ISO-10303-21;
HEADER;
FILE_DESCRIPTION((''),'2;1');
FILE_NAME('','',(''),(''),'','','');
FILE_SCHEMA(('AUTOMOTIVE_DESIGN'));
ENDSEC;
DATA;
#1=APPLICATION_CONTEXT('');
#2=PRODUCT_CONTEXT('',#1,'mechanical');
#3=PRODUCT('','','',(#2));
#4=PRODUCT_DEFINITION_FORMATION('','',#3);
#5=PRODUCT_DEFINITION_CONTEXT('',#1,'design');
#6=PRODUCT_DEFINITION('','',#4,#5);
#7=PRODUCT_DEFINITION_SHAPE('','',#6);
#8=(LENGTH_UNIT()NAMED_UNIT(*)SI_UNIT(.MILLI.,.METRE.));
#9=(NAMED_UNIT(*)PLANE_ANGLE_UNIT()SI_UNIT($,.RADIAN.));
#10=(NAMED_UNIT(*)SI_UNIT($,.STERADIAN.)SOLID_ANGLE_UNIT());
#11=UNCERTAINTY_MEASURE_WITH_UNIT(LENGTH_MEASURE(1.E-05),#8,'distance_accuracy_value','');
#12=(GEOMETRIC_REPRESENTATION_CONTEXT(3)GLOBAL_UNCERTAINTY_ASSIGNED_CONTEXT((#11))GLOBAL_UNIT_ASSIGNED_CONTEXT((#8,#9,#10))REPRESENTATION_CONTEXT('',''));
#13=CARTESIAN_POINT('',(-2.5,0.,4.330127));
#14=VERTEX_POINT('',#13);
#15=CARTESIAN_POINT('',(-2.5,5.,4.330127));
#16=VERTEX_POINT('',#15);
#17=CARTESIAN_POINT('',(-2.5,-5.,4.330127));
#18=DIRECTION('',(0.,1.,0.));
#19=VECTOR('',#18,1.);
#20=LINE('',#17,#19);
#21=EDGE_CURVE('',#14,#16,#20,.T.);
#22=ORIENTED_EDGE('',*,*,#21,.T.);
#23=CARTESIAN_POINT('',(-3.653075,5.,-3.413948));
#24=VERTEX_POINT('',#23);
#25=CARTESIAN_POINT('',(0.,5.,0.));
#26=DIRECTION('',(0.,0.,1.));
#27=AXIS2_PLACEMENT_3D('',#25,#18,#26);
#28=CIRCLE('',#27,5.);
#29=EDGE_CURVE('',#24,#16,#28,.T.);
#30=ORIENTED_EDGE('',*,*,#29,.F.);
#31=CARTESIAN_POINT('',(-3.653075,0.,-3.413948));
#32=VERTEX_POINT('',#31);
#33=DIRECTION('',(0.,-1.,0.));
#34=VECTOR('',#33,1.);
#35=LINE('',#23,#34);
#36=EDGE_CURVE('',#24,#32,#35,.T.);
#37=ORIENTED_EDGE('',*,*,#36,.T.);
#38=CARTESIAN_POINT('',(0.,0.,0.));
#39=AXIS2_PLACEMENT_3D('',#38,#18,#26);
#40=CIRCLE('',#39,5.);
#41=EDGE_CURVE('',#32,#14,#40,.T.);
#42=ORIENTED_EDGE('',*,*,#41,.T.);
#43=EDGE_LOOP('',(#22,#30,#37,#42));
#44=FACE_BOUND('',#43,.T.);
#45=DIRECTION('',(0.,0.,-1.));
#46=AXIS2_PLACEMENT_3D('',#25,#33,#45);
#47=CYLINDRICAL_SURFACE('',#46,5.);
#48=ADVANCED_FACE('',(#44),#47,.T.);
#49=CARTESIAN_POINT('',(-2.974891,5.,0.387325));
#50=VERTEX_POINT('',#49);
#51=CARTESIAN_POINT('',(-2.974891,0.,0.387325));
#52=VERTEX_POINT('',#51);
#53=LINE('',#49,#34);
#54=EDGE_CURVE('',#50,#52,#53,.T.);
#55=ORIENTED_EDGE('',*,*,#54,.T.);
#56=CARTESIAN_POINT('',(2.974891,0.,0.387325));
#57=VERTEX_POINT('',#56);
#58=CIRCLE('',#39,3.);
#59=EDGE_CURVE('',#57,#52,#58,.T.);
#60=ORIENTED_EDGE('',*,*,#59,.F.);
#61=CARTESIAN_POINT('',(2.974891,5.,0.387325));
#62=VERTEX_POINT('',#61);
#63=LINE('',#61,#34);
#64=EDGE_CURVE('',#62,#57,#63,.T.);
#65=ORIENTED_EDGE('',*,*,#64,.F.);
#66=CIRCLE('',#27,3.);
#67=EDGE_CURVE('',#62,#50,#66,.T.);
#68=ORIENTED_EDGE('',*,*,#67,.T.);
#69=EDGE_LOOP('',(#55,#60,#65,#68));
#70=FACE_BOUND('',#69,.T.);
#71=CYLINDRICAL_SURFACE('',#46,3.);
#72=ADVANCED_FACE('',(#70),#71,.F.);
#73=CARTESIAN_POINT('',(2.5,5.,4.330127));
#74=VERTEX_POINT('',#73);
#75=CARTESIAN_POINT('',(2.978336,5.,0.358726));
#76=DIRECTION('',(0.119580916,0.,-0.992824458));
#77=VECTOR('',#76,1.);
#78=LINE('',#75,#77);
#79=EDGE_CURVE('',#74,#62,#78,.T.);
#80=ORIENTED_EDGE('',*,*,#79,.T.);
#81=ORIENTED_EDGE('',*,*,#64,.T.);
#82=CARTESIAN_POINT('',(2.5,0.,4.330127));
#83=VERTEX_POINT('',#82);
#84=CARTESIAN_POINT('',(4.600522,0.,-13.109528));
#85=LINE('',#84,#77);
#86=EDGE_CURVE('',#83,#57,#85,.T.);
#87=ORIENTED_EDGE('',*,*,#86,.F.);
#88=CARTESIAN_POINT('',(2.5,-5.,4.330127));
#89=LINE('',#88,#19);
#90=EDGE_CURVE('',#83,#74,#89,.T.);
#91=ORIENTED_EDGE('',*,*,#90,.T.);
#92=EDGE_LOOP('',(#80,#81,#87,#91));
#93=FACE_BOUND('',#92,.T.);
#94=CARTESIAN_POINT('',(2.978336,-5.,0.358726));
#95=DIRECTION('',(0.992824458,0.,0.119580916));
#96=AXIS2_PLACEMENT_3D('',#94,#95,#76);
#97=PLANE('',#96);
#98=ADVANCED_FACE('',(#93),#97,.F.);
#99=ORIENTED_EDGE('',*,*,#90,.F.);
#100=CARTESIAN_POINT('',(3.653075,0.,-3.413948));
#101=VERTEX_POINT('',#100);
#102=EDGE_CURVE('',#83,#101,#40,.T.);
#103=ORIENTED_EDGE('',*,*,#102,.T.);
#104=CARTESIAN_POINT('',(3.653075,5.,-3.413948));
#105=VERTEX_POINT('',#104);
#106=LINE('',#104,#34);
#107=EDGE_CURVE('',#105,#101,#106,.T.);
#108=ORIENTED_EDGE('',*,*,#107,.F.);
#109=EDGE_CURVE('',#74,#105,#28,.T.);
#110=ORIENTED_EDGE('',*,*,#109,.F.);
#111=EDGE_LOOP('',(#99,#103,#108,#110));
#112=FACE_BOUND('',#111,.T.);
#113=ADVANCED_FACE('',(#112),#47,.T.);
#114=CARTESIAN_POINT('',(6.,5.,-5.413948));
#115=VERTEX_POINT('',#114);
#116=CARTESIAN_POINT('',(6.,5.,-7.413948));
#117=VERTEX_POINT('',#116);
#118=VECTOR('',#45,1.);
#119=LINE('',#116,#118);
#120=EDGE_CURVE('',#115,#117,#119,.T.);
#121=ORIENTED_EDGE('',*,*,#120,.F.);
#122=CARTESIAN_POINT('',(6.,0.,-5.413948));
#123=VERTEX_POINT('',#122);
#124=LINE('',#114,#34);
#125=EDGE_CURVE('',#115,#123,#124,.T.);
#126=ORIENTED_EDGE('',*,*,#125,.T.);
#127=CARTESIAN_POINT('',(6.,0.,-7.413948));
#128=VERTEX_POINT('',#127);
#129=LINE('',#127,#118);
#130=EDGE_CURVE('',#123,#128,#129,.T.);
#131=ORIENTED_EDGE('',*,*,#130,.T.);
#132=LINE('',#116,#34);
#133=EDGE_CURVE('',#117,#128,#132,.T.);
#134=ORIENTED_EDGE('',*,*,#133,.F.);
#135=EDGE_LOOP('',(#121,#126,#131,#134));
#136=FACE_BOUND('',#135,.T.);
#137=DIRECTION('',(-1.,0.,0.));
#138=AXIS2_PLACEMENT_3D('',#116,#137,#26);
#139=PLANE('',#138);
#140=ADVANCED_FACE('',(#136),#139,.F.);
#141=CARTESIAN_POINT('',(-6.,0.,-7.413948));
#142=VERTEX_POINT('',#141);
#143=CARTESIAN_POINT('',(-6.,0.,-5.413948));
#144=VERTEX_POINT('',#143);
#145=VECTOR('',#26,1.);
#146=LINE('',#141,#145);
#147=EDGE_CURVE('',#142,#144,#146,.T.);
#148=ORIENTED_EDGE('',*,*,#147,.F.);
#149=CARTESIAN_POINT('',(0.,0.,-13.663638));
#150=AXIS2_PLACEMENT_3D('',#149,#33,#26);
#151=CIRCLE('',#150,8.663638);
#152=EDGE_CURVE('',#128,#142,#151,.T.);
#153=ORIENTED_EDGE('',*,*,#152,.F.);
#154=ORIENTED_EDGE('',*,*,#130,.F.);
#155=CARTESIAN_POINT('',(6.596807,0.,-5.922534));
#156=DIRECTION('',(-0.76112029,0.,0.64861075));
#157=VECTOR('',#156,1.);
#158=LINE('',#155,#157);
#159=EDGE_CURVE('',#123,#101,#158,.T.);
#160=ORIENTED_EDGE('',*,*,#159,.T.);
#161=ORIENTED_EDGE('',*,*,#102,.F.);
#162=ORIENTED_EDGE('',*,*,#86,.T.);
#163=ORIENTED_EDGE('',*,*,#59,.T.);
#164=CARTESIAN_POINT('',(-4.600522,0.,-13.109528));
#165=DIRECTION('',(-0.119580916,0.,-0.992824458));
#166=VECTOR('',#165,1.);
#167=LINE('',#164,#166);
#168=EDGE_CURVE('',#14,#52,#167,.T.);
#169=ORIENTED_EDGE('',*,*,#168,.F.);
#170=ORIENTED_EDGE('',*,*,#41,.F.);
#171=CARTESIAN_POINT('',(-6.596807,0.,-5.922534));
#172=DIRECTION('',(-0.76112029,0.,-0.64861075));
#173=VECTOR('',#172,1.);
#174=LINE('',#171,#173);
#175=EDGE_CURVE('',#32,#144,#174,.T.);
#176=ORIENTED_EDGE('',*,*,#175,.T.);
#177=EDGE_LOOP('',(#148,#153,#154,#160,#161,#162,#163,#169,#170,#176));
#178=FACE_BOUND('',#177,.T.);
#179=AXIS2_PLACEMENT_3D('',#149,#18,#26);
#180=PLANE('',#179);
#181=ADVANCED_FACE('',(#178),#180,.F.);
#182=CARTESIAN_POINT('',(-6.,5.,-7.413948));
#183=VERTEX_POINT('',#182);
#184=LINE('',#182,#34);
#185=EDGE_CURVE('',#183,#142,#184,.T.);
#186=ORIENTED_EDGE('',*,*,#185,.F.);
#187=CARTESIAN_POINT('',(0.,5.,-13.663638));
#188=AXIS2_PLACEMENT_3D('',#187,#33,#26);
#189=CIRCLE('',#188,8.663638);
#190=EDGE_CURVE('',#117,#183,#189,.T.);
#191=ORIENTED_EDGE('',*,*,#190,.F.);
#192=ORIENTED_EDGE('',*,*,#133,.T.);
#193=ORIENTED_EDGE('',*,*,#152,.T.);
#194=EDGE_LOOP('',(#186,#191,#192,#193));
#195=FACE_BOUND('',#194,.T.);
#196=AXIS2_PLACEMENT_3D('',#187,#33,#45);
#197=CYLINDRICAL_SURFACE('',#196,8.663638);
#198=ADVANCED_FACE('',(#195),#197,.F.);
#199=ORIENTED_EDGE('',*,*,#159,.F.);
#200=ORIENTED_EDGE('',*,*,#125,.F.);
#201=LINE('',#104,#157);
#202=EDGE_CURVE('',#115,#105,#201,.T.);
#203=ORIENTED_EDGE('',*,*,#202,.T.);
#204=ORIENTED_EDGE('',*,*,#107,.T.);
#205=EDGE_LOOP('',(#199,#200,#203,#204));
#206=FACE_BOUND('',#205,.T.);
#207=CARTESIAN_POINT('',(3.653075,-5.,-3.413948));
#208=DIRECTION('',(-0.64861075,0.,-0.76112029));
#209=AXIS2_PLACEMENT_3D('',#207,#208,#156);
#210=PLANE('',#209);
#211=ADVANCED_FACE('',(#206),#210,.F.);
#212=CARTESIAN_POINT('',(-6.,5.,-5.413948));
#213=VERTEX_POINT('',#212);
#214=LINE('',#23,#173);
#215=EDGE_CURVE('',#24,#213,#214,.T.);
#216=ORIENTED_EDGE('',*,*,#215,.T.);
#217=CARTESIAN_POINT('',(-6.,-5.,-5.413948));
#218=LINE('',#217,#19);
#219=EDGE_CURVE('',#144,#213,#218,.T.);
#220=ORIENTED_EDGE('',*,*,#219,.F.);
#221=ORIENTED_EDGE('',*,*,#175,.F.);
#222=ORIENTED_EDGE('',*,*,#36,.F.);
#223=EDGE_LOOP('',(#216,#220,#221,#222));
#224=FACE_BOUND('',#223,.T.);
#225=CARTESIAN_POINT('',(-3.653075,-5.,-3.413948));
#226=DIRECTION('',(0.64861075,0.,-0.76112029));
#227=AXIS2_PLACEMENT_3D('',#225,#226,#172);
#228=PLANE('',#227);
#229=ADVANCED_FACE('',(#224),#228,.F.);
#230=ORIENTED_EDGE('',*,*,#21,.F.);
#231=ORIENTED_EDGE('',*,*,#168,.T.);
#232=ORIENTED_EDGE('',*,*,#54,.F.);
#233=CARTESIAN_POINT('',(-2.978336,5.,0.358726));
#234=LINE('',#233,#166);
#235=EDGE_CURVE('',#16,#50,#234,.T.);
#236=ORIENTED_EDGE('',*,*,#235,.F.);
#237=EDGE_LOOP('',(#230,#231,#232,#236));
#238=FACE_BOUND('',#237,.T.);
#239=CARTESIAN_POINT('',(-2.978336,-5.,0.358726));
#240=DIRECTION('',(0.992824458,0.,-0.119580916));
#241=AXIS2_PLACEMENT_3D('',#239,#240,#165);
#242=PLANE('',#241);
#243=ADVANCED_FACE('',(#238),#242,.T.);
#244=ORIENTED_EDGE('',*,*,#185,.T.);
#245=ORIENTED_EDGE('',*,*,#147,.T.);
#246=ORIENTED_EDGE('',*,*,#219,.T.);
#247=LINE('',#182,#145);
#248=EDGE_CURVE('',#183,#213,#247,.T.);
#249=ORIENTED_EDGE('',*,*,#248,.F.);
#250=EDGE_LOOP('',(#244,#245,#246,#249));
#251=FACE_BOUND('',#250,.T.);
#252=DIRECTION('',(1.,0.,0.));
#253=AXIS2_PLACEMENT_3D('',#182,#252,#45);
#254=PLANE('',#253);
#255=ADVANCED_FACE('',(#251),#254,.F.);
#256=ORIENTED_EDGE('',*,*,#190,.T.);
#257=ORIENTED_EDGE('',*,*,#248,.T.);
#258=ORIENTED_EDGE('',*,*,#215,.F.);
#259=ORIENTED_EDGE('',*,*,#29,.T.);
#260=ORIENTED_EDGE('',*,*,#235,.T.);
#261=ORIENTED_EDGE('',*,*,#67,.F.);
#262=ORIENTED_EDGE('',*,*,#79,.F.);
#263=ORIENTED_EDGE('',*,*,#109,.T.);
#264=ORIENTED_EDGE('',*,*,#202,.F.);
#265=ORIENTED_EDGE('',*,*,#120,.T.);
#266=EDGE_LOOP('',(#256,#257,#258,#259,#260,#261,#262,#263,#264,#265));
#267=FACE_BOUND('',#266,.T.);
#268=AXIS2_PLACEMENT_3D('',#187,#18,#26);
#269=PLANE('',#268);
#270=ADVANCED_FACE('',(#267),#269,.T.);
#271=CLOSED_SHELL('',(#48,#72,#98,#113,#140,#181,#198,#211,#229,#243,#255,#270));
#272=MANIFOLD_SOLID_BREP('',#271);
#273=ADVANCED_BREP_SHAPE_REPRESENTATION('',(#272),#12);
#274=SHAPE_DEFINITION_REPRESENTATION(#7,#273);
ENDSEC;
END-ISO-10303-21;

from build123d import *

# Parameters (mm, degrees)
CROQUIS1_R              = 3
SALIENTE_EXTRUIR1_DEPTH = 5
CORTAR_EXTRUIR1_START   = -10
CORTAR_EXTRUIR1_DEPTH   = 10
CORTAR_EXTRUIR2_DEPTH   = 10


with BuildPart() as part:
    # Croquis1 → Saliente-Extruir1 (new body)
    with BuildSketch(Plane(origin=(0, 0, 0), x_dir=(1, 0, 0), z_dir=(0, 1, 0))):
        with BuildLine():
            Line((-6, 7.413947971), (-6, 3.413947971))
            Line((-6, 3.413947971), (-3.653075314, 3.413947971))
            ThreePointArc((-3.653075314, 3.413947971), (0, -5), (3.653075314, 3.413947971))
            Line((3.653075314, 3.413947971), (6, 3.413947971))
            Line((6, 3.413947971), (6, 7.413947971))
            ThreePointArc((6, 7.413947971), (0, 5), (-6, 7.413947971))
        make_face()
        Circle(CROQUIS1_R, mode=Mode.SUBTRACT)
    extrude(amount=SALIENTE_EXTRUIR1_DEPTH)

    # Croquis2 → Cortar-Extruir1 (cut)
    with BuildSketch(Plane(origin=(0, 5, 0), x_dir=(1, 0, 0), z_dir=(0, 1, 0)).offset(CORTAR_EXTRUIR1_START)):
        with BuildLine():
            ThreePointArc((-2.5, -4.330127019), (-1.294095226, -4.829629131), (0, -5))
            ThreePointArc((0, -5), (1.294095226, -4.829629131), (2.5, -4.330127019))
            Line((2.5, -4.330127019), (2.981780701, -0.330127019))
            ThreePointArc((2.981780701, -0.330127019), (2.995441712, -0.165314693), (3, 0))
            ThreePointArc((3, 0), (-0.165314693, 2.995441712), (-2.981780701, -0.330127019))
            Line((-2.981780701, -0.330127019), (-2.5, -4.330127019))
        make_face()
    extrude(amount=CORTAR_EXTRUIR1_DEPTH, mode=Mode.SUBTRACT)

    # Croquis3 → Cortar-Extruir2 (cut)
    with BuildSketch(Plane(origin=(0, 5, 0), x_dir=(1, 0, 0), z_dir=(0, 1, 0))):
        Polygon((3.653075314, 3.413947971), (6, 5.413947971), (6, 3.413947971), align=None)
        Polygon((-3.653075314, 3.413947971), (-6, 5.413947971), (-6, 3.413947971), align=None)
    extrude(amount=-CORTAR_EXTRUIR2_DEPTH, mode=Mode.SUBTRACT)


solid = part.part
